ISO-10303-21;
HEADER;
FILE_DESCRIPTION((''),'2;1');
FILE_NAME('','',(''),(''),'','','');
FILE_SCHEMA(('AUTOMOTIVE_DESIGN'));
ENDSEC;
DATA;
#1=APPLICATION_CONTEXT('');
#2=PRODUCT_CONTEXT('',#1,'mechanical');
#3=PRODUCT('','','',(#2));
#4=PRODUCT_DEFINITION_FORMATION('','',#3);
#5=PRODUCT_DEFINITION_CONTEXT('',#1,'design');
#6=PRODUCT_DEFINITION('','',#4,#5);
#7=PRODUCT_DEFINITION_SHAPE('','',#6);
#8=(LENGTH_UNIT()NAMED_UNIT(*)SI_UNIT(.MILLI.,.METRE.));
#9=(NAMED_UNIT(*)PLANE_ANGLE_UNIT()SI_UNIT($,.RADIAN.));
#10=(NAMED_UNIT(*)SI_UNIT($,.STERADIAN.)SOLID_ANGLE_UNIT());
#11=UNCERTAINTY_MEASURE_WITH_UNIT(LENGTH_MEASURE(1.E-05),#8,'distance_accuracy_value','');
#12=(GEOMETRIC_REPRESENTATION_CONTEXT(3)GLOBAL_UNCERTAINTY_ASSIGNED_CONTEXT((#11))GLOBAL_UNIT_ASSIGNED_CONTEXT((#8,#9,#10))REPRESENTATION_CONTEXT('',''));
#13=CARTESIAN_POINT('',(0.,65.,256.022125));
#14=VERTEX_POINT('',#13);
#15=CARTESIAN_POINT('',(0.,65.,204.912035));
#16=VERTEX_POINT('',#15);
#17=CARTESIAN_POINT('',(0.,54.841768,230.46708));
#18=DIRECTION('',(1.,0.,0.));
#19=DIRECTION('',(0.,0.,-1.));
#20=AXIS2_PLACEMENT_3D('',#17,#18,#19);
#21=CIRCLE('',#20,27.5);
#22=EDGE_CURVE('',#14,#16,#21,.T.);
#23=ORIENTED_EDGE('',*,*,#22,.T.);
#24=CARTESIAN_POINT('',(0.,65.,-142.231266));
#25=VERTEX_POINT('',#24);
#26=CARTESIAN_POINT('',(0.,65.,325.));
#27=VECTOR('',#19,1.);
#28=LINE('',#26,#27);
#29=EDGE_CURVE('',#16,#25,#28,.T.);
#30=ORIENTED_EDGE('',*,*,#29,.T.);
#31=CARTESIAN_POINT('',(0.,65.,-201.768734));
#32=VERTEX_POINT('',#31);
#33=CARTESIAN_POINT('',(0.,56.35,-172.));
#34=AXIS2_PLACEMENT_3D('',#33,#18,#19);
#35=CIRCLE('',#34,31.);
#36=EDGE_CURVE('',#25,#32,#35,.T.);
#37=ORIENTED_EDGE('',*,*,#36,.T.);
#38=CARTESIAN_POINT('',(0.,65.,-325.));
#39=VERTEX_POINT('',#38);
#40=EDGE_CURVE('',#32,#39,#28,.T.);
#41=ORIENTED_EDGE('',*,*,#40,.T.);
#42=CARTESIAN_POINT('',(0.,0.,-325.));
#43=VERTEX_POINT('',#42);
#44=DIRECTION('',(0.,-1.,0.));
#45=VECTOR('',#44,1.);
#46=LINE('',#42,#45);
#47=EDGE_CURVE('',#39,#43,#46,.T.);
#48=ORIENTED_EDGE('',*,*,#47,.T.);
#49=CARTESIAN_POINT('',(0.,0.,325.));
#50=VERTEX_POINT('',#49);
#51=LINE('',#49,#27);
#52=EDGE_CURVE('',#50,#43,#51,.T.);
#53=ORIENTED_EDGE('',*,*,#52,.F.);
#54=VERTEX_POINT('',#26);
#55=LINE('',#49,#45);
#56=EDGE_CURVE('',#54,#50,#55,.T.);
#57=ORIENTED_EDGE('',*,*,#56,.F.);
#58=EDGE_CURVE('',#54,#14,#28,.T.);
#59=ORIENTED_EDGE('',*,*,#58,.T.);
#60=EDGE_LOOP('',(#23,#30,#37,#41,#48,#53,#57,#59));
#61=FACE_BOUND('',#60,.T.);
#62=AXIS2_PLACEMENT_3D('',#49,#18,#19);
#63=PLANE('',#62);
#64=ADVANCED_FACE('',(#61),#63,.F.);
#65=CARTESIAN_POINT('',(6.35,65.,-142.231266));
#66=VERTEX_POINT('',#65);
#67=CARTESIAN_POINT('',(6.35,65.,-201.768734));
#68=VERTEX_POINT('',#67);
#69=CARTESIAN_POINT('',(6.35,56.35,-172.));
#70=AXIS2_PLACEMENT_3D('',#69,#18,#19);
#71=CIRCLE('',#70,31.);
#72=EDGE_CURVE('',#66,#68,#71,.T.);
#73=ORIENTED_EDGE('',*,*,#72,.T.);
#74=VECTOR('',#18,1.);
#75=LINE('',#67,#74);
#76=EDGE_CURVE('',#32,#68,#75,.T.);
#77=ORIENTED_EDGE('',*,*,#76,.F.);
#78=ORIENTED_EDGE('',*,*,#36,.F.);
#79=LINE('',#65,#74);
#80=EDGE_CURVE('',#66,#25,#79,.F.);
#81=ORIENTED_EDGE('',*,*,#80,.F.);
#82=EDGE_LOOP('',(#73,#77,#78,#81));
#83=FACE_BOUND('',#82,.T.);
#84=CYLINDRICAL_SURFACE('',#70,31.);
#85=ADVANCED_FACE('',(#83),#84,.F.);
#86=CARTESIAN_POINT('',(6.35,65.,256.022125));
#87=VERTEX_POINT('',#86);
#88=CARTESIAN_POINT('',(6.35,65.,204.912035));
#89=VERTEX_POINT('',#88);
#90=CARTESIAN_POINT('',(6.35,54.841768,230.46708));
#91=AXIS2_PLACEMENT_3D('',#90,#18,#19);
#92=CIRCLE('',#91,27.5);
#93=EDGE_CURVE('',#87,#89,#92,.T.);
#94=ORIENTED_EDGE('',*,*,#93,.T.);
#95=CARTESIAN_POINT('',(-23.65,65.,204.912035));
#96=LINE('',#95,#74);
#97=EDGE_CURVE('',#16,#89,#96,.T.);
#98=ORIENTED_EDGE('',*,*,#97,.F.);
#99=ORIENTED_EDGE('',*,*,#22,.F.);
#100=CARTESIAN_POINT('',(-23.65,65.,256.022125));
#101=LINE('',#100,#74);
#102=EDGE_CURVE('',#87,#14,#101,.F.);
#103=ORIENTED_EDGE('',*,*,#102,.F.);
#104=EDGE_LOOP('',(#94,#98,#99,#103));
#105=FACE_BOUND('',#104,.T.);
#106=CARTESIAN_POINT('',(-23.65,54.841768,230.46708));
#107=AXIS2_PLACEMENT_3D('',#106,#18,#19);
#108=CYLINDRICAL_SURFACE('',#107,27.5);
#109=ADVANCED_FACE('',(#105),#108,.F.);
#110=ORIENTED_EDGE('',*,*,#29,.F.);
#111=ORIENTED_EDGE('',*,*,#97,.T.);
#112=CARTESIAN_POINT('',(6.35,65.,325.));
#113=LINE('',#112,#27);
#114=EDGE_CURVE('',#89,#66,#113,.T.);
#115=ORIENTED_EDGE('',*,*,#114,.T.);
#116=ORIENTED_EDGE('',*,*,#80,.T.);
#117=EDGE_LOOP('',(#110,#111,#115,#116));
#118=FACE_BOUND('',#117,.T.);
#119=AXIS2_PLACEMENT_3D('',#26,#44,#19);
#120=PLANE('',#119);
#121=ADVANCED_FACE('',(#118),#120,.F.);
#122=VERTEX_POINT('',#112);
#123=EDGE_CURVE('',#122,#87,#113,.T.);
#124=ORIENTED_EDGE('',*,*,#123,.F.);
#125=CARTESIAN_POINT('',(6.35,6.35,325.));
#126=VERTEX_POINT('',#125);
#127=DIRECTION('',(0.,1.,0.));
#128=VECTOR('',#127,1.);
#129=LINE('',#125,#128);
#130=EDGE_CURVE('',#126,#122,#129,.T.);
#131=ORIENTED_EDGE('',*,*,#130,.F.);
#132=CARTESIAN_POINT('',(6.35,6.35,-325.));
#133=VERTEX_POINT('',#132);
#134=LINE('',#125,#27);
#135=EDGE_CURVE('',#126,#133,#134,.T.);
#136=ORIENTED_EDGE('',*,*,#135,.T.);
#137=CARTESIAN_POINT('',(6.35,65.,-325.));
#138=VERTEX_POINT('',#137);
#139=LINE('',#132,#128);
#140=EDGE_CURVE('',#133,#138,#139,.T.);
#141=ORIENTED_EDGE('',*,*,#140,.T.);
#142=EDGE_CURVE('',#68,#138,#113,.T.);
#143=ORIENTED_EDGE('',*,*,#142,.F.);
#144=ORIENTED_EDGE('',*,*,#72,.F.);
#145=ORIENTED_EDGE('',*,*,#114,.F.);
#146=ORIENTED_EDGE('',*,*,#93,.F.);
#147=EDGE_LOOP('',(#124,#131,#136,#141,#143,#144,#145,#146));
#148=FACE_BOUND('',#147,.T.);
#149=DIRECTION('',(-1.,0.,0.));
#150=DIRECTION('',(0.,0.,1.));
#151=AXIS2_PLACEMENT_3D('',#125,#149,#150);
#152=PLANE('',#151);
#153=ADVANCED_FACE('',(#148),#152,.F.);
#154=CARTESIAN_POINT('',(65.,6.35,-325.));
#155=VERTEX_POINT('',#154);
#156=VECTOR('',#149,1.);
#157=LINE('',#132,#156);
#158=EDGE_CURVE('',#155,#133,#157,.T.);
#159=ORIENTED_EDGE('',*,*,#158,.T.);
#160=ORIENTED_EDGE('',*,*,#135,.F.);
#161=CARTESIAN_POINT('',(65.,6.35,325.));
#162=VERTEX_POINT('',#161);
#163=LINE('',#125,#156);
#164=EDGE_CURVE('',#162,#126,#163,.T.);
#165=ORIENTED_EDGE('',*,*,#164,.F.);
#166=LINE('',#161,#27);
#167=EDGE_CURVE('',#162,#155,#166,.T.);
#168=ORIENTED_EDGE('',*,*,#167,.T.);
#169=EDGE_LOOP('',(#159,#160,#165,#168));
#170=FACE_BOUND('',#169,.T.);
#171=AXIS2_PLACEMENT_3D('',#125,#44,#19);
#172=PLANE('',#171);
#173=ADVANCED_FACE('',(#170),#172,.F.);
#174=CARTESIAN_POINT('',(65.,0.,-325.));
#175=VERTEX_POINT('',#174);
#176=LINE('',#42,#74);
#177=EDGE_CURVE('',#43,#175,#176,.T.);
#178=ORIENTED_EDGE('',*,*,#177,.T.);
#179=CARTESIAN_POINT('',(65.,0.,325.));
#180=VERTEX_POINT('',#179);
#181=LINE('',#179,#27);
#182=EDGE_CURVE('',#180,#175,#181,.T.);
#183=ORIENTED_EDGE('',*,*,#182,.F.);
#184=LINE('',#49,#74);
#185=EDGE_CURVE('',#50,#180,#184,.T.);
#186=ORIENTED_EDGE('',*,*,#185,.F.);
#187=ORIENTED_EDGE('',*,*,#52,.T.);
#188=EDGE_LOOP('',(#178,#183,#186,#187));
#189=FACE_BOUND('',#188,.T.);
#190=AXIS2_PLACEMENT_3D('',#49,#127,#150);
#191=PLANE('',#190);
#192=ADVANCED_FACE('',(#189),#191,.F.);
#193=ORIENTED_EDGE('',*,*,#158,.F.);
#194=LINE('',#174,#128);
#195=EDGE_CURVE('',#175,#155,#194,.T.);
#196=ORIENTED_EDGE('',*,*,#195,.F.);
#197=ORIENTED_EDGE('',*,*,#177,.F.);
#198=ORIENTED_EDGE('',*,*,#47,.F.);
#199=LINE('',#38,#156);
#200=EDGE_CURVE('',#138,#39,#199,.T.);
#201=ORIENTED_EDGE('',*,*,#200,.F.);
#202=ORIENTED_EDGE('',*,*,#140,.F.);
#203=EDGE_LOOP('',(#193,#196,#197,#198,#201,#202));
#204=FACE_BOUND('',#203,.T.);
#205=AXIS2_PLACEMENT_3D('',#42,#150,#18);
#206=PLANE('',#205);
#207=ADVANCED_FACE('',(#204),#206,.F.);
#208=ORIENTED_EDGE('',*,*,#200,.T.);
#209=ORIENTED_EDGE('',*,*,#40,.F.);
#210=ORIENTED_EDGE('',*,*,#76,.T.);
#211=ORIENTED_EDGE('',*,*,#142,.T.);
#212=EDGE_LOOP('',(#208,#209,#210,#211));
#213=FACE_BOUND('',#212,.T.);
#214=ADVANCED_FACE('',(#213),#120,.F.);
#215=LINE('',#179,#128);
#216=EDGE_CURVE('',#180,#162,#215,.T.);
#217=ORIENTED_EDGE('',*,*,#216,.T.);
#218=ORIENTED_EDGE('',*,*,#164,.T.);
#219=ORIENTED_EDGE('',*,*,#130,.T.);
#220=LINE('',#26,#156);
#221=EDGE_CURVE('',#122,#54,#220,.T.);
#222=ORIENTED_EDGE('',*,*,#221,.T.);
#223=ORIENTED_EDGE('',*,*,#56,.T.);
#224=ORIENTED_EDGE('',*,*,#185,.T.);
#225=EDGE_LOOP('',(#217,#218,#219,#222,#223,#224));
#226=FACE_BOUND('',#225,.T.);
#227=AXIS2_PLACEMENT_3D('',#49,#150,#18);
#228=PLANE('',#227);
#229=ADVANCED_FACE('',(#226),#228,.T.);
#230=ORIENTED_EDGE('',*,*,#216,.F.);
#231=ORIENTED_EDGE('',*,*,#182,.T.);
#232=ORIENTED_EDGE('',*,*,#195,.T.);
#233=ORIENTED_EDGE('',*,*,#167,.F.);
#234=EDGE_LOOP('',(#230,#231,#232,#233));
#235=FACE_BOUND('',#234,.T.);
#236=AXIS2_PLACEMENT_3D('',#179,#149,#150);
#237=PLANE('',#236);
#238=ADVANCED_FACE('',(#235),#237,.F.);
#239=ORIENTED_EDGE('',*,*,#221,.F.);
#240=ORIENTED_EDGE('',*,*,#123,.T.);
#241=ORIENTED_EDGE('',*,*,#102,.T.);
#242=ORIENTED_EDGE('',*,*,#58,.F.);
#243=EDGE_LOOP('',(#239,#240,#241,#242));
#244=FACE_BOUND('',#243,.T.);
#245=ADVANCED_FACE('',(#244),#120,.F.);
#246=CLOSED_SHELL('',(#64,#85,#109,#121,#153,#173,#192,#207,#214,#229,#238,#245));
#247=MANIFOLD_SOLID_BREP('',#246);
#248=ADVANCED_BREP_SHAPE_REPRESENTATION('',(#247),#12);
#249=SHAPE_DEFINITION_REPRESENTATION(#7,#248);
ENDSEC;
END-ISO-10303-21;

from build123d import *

# Parameters (mm, degrees)
SALIENTE_EXTRUIR1_DEPTH           = 325
TALADRO3_DEPTH                    = 6.35
TALADRO_DE_MARGEN_PARA_M561_D     = 62
TALADRO_DE_MARGEN_PARA_M561_DEPTH = 287.94
TALADRO_DE_MARGEN_PARA_M561_TIP   = 18.62667919


# Read off the part's stored shape, not the designer's step: Taladro3
with BuildPart() as part:
    # Croquis1 → Saliente-Extruir1 (new, symmetric)
    with BuildSketch(Plane.XY):
        Polygon((0, 0), (0, 65), (6.35, 65), (6.35, 6.35), (65, 6.35), (65, 0), align=None)
    extrude(amount=SALIENTE_EXTRUIR1_DEPTH, both=True)

    # Taladro3 outline → Taladro3 (cut)
    with BuildSketch(Plane.YZ):
        with BuildLine():
            Line((65, 204.912035309), (65, 256.022124888))
            ThreePointArc((65, 256.022124888), (27.341767585, 230.467080098), (65, 204.912035309))
        make_face()
    extrude(amount=TALADRO3_DEPTH, mode=Mode.SUBTRACT)

    # Taladro de margen para M561
    with Locations(Plane(origin=(6.35, 55.113874636, 289.004791986), x_dir=(0, 1, 0), z_dir=(1, 0, 0))):
        with Locations((1.236125364, -461.004791986)):
            Hole(TALADRO_DE_MARGEN_PARA_M561_D / 2, depth=TALADRO_DE_MARGEN_PARA_M561_DEPTH)
            with Locations((0, 0, -(TALADRO_DE_MARGEN_PARA_M561_DEPTH + TALADRO_DE_MARGEN_PARA_M561_TIP / 2))):  # 118° drill point
                Cone(0, TALADRO_DE_MARGEN_PARA_M561_D / 2, TALADRO_DE_MARGEN_PARA_M561_TIP, mode=Mode.SUBTRACT)


solid = part.part
